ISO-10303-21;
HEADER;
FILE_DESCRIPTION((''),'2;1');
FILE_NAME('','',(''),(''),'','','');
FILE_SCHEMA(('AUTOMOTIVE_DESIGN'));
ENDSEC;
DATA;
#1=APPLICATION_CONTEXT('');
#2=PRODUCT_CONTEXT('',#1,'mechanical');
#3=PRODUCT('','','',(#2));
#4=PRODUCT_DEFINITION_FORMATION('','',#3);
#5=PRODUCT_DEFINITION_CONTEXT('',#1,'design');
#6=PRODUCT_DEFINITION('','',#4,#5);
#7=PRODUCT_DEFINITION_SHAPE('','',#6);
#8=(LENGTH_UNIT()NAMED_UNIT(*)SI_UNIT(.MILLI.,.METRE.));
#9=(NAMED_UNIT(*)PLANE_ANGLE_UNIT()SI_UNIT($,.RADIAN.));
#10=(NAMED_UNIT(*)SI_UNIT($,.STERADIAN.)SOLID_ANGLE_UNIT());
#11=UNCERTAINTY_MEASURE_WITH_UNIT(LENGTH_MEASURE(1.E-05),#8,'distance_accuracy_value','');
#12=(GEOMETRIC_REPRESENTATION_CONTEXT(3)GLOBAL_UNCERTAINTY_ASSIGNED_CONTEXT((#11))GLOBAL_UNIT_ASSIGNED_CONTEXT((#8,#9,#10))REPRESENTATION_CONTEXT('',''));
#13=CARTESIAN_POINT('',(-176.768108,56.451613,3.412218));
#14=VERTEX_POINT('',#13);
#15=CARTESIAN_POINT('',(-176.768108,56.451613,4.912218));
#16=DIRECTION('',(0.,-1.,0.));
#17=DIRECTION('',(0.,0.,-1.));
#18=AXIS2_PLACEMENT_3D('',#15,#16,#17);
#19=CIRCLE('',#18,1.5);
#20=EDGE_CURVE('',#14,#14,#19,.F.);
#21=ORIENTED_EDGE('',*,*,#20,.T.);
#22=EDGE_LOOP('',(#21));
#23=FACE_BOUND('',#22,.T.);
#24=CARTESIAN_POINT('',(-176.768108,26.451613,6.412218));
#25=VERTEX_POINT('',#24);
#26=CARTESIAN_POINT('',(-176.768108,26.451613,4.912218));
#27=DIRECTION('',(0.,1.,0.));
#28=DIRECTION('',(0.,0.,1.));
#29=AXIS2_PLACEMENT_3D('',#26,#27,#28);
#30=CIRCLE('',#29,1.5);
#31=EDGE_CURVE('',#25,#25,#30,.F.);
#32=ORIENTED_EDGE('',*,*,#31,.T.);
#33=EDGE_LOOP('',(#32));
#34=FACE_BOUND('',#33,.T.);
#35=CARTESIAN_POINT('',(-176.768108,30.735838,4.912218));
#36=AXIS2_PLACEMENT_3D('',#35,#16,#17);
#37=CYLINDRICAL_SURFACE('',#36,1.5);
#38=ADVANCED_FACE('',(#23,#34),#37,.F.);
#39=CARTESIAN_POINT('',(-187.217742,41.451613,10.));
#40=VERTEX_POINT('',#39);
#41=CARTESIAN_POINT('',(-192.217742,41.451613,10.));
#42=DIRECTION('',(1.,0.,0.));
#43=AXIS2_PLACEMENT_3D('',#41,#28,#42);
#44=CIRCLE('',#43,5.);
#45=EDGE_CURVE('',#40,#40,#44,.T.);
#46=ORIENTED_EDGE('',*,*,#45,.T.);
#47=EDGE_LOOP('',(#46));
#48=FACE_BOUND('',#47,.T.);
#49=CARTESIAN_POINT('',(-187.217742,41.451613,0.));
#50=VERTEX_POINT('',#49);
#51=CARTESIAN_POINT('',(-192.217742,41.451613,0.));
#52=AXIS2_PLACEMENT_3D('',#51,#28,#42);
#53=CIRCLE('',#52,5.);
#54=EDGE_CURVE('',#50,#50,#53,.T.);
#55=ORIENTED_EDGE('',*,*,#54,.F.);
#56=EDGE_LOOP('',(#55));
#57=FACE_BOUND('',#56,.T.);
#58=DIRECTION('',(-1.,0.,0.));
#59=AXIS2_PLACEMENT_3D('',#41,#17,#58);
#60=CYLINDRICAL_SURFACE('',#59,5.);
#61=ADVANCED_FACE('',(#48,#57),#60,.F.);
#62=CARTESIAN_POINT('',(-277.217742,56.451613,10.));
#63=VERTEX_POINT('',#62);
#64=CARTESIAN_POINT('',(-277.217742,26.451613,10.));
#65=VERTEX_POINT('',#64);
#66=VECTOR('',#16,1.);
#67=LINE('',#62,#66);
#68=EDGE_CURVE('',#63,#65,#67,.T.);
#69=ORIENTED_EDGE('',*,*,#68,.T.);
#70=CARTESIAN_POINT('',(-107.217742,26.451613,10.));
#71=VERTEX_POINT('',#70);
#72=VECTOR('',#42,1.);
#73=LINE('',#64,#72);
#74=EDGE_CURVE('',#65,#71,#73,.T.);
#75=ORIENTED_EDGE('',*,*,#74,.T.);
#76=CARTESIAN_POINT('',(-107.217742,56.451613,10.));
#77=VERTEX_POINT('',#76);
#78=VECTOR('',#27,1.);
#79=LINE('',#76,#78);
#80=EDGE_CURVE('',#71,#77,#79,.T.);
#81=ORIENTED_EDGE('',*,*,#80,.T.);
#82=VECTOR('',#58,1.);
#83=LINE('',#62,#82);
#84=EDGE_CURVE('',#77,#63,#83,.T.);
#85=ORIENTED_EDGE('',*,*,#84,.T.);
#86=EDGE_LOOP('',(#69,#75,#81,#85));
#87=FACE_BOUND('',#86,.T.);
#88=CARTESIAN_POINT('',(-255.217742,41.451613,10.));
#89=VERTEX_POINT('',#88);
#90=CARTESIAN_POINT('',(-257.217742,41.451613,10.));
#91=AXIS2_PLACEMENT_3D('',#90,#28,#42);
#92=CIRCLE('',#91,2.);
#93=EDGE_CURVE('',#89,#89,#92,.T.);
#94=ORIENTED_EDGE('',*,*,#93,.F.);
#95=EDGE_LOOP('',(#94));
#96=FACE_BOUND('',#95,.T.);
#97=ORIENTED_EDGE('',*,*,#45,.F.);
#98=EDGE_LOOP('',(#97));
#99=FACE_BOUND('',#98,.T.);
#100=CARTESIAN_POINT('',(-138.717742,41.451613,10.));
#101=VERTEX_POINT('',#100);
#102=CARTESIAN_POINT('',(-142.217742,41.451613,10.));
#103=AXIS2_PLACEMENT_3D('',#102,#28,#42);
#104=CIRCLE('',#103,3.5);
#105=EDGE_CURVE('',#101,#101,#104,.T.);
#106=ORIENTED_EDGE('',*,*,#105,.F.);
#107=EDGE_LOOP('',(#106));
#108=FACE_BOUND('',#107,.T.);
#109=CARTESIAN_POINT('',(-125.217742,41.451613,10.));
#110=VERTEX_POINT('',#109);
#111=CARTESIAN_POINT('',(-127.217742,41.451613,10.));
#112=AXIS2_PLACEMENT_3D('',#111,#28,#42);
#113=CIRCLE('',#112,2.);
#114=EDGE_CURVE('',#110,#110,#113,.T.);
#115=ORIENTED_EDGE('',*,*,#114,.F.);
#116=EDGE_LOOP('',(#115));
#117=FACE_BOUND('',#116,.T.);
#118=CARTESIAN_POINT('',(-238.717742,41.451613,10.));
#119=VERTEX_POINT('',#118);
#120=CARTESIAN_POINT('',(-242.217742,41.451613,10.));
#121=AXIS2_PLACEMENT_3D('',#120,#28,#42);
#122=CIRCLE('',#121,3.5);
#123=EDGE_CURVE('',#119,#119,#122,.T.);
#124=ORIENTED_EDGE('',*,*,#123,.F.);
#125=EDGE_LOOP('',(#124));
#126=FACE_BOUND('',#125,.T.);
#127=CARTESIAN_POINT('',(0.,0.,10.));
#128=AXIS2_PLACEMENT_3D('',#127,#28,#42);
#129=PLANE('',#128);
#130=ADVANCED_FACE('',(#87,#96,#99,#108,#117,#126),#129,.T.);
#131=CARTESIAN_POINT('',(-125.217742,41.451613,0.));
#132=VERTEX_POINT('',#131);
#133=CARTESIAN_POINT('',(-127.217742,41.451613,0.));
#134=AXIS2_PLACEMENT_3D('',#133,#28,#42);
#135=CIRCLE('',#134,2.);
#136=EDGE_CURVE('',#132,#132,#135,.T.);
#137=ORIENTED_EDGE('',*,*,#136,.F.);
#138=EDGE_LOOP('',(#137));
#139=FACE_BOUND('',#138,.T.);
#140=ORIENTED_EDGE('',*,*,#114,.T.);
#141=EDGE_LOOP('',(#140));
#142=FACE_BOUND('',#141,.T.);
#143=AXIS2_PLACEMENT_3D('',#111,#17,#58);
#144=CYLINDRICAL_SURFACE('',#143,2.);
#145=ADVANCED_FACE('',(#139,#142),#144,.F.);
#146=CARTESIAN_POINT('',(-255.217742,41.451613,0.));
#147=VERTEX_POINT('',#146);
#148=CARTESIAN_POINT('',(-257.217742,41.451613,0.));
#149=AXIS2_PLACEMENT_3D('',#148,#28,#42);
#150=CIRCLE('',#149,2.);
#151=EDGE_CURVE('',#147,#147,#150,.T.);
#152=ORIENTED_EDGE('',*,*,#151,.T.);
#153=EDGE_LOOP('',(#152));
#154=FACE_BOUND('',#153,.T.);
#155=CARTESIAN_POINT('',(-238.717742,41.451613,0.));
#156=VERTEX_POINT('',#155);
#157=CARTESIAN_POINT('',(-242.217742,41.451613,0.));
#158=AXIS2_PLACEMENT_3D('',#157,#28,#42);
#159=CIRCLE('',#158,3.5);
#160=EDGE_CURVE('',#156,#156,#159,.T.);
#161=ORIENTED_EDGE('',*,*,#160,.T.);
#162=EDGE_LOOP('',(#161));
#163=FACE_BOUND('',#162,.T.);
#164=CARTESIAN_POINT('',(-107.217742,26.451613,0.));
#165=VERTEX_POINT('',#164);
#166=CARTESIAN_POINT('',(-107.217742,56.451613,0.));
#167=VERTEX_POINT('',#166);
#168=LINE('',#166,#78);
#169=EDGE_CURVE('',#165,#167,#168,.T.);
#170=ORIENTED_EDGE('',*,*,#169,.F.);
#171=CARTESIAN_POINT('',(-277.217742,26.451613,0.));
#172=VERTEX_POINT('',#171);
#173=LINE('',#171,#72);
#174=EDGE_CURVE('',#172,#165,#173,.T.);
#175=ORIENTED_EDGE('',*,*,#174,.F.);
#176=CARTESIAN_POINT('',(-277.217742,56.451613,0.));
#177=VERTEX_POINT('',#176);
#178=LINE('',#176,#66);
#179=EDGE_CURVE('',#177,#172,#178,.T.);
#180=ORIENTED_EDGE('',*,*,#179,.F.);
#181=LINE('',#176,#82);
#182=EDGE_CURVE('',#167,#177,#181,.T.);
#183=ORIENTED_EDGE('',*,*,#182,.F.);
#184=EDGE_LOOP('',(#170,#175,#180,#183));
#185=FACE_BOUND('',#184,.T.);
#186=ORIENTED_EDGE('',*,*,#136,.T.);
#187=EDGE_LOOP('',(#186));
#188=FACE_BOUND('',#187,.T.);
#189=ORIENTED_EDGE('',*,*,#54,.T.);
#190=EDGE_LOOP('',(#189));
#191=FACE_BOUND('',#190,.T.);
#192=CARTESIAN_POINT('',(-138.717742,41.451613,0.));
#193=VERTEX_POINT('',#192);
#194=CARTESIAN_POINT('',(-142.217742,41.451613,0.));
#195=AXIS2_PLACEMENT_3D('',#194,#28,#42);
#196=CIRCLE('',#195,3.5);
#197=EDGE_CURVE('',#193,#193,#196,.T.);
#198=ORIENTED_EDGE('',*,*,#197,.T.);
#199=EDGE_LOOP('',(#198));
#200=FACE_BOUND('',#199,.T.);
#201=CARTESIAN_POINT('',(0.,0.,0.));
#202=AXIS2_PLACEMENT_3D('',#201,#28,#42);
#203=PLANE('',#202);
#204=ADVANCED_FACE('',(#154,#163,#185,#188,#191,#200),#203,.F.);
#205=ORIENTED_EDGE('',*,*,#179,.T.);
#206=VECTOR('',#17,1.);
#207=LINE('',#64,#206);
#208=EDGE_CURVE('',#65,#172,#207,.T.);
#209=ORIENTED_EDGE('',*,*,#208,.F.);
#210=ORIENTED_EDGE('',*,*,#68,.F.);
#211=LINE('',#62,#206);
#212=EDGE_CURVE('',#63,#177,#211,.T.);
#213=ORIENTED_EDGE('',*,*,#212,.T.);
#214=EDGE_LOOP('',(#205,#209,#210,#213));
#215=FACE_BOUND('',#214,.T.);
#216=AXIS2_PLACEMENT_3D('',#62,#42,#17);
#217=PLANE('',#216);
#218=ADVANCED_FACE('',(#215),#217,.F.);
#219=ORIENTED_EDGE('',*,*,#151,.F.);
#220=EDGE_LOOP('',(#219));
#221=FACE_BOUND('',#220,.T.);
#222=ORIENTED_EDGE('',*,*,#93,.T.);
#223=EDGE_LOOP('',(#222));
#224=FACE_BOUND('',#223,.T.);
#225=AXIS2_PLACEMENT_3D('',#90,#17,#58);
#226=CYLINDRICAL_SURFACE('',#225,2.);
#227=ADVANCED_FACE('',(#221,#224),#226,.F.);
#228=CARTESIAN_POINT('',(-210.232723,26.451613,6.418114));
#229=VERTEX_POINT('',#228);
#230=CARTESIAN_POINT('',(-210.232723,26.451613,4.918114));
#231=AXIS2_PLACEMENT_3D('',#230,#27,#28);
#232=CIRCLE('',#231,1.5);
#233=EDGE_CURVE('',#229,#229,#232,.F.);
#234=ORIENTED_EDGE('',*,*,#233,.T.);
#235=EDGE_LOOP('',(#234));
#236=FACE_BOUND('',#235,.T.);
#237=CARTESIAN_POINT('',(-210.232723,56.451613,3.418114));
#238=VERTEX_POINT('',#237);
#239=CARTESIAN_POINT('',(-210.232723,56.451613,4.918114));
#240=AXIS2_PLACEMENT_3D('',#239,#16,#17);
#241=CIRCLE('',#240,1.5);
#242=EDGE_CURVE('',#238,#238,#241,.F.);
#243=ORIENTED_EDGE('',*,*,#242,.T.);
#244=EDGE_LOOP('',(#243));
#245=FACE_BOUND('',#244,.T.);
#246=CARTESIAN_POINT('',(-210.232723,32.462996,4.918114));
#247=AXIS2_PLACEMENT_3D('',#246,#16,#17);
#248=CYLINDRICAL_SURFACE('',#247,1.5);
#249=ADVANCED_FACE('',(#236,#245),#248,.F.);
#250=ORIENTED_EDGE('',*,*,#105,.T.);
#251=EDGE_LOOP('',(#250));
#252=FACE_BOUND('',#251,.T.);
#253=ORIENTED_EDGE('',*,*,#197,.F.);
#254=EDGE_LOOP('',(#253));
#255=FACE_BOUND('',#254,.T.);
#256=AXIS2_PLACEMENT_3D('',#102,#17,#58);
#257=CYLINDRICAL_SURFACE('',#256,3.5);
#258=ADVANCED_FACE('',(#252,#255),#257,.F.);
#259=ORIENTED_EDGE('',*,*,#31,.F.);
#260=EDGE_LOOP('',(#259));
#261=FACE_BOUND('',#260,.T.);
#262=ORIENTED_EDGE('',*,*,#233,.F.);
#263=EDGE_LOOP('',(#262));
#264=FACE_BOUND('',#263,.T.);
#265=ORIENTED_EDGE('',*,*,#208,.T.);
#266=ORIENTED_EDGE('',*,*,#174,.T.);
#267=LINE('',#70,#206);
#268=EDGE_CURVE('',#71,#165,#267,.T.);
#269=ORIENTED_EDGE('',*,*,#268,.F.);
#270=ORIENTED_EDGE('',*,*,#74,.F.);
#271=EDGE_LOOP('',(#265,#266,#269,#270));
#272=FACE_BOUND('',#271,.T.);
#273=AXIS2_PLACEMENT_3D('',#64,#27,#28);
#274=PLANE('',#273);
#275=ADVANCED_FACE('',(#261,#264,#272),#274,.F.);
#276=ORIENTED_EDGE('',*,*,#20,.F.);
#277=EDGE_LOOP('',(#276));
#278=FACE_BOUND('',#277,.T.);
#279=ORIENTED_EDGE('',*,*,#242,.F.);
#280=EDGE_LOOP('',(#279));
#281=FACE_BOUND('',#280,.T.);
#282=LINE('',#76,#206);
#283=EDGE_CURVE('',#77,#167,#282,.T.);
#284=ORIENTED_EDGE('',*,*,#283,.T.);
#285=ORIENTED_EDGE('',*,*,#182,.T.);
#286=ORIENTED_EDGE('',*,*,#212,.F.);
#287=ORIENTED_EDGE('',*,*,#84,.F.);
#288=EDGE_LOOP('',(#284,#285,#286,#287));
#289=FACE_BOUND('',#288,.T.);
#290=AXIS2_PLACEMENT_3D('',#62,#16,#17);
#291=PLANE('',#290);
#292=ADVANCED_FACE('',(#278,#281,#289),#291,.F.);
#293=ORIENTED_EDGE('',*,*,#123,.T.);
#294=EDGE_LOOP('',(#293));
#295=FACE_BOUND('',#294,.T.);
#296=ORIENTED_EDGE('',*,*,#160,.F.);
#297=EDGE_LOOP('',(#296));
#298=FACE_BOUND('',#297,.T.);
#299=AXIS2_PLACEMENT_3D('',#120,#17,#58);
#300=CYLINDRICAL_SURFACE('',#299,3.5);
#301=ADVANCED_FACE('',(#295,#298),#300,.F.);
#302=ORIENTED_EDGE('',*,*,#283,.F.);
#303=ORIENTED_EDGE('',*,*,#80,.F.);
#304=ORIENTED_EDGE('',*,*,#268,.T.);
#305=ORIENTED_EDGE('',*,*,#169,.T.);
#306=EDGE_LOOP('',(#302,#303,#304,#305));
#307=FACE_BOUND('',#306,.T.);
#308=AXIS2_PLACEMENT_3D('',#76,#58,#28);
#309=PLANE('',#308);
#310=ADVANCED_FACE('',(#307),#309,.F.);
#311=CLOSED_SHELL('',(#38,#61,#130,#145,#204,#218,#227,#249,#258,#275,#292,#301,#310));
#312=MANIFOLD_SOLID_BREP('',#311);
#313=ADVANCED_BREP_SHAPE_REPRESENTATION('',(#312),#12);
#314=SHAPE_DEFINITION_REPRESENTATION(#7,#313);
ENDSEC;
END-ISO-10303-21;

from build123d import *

# Parameters (mm, degrees)
ESBO_O1_W                 = 170
ESBO_O1_H                 = 30
ESBO_O1_R                 = 5
ESBO_O1_R_2               = 3.5
ESBO_O1_R_3               = 2
RESSALTO_EXTRUS_O1_DEPTH  = 10
CORTE_EXTRUS_O1_START     = 26.451612903
CORTE_EXTRUS_O1_OUTLINE_R = 1.5
CORTE_EXTRUS_O1_DEPTH     = 30


# Read off the part's stored shape, not the designer's step: Corte-extrusão1
with BuildPart() as part:
    # Esboço1 → Ressalto-extrusão1 (new body)
    with BuildSketch(Plane.XY):
        with Locations((-192.217741935, 41.451612903)):
            Rectangle(ESBO_O1_W, ESBO_O1_H)
        with Locations((-192.217741935, 41.451612903)):
            Circle(ESBO_O1_R, mode=Mode.SUBTRACT)
        with Locations((-242.217741935, 41.451612903)):
            Circle(ESBO_O1_R_2, mode=Mode.SUBTRACT)
        with Locations((-142.217741935, 41.451612903)):
            Circle(ESBO_O1_R_2, mode=Mode.SUBTRACT)
        with Locations((-257.217741935, 41.451612903)):
            Circle(ESBO_O1_R_3, mode=Mode.SUBTRACT)
        with Locations((-127.217741935, 41.451612903)):
            Circle(ESBO_O1_R_3, mode=Mode.SUBTRACT)
    extrude(amount=RESSALTO_EXTRUS_O1_DEPTH)

    # Corte-extrusão1 outline → Corte-extrusão1 (cut)
    with BuildSketch(Plane(origin=(0, 0, 0), x_dir=(1, 0, 0), z_dir=(0, 1, 0)).offset(CORTE_EXTRUS_O1_START)):
        with Locations((-210.23272287, -4.918113723)):
            Circle(CORTE_EXTRUS_O1_OUTLINE_R)
        with Locations((-176.768107745, -4.912217988)):
            Circle(CORTE_EXTRUS_O1_OUTLINE_R)
    extrude(amount=CORTE_EXTRUS_O1_DEPTH, mode=Mode.SUBTRACT)


solid = part.part
